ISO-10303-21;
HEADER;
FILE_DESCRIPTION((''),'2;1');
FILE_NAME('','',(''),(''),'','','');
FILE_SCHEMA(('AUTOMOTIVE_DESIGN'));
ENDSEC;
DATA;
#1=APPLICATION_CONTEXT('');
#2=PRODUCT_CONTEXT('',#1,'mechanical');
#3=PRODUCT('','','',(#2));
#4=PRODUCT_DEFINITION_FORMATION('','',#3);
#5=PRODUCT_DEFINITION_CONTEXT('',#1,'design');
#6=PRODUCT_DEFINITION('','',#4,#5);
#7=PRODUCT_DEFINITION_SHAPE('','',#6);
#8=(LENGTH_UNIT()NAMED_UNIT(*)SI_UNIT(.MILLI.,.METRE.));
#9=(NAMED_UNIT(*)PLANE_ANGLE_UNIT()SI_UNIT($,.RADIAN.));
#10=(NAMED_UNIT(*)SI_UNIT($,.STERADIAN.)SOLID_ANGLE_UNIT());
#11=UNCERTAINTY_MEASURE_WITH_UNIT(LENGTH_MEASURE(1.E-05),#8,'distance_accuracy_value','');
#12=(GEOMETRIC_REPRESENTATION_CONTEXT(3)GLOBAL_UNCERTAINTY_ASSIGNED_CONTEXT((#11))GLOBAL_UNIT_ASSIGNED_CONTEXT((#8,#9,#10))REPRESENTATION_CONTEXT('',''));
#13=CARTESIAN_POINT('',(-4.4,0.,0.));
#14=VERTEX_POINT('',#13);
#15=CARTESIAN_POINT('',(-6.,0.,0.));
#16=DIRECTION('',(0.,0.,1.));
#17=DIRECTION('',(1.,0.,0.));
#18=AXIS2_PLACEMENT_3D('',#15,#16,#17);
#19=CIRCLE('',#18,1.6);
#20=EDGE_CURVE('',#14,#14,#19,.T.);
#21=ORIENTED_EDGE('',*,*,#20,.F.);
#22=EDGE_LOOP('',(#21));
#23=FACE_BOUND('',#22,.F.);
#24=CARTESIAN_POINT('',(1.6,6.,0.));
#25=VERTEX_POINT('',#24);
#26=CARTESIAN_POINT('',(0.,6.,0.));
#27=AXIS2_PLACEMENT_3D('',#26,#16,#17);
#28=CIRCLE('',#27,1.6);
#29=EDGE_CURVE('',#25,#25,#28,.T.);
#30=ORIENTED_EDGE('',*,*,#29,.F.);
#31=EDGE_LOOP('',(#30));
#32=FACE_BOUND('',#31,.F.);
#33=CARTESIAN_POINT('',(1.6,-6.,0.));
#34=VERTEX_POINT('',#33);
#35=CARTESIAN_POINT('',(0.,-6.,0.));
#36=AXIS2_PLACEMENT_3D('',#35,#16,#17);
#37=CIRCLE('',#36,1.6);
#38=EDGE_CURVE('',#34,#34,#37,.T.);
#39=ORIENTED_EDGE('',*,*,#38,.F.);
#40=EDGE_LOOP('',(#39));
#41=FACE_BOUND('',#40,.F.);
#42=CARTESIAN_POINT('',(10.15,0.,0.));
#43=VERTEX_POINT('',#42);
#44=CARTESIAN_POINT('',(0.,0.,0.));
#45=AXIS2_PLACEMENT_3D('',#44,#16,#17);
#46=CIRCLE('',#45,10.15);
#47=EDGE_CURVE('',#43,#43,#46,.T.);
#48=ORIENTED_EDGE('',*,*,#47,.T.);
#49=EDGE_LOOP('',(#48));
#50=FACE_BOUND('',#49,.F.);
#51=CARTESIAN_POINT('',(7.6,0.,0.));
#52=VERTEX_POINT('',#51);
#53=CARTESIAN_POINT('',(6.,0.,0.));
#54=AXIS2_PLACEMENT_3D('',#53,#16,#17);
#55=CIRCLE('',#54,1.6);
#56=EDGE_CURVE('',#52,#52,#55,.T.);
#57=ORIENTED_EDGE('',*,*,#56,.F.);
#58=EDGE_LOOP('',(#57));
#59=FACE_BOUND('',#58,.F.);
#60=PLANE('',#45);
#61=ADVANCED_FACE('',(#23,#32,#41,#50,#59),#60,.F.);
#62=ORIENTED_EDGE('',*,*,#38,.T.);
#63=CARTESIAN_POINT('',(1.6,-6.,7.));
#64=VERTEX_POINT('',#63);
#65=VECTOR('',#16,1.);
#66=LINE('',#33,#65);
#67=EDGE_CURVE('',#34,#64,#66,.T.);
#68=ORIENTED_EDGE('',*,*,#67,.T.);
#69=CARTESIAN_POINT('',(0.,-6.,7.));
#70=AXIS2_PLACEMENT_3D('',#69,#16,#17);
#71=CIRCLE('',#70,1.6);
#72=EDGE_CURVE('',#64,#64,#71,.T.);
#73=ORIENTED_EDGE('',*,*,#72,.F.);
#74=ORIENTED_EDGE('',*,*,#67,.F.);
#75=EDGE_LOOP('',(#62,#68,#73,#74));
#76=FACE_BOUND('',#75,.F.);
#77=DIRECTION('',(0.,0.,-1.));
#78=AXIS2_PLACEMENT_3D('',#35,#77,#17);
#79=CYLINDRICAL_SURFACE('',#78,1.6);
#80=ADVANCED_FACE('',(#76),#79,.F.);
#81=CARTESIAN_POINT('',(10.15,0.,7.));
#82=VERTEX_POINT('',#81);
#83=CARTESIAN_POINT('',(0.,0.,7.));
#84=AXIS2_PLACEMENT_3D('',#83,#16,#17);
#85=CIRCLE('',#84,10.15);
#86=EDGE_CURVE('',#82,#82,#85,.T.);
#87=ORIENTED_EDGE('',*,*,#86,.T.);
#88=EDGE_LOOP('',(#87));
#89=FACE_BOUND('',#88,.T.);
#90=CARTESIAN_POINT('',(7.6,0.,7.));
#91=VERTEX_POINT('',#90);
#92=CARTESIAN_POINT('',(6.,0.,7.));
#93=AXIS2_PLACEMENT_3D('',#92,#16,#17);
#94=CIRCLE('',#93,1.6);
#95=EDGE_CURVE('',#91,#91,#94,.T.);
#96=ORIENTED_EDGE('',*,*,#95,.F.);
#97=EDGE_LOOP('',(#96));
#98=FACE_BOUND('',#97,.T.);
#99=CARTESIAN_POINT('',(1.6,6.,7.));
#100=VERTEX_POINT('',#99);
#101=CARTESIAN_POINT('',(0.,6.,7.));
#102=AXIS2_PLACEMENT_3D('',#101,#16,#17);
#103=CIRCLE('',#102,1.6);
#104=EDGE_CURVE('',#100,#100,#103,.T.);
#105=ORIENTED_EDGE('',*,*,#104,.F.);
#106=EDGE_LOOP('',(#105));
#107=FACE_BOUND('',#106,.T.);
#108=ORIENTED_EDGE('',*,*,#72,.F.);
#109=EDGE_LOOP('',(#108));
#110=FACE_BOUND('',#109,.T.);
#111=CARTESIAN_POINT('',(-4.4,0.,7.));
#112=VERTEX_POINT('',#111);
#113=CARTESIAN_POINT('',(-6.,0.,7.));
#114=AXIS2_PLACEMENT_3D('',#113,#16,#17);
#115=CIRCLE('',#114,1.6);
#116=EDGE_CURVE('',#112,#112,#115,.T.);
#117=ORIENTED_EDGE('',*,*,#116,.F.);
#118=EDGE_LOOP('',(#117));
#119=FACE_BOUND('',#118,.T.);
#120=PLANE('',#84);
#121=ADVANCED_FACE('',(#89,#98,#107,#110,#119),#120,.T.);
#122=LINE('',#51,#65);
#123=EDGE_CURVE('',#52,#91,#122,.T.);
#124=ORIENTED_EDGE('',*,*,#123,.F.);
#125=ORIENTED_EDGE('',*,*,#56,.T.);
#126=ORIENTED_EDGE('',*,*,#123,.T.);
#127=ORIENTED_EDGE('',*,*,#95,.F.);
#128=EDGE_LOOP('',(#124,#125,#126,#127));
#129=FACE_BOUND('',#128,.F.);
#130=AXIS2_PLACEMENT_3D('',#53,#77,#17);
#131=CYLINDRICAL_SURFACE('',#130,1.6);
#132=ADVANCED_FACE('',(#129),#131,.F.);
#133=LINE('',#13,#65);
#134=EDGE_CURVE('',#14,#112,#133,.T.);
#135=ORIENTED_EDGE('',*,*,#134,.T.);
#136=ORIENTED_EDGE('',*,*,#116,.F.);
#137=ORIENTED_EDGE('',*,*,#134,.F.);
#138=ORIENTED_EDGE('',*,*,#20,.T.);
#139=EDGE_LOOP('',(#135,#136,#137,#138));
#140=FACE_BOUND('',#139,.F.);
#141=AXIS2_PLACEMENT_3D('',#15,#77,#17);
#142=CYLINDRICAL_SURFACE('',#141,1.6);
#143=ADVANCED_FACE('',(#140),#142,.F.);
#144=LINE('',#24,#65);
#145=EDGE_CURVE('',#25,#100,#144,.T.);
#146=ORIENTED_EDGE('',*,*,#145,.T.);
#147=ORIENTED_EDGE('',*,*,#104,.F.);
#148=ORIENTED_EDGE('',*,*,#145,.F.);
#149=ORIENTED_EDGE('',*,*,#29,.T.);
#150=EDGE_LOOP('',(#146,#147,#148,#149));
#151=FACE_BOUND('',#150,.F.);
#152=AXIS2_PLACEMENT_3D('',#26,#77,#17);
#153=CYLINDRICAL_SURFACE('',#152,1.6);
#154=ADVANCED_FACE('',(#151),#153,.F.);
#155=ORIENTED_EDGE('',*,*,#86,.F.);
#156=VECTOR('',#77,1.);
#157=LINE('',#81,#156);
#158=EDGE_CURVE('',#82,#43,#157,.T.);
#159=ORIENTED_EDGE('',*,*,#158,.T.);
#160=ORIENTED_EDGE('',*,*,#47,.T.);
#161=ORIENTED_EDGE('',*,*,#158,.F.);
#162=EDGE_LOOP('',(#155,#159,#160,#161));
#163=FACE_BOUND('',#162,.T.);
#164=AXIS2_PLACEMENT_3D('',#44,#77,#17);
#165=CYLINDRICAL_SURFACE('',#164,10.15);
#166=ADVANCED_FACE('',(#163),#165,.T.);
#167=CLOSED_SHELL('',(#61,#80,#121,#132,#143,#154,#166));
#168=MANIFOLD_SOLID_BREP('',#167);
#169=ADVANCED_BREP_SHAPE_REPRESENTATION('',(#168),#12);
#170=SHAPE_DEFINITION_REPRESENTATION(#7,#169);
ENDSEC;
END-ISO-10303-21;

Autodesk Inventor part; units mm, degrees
ref_plane "YZ Plane" through (0, 0, 0) normal (1, 0, 0) x (0, 1, 0)
ref_plane "XZ Plane" through (0, 0, 0) normal (0, 1, 0) x (-1, 0, 0)
ref_plane "XY Plane" through (0, 0, 0) normal (0, 0, 1) x (1, 0, 0)
sketch "스케치1" plane through (0, 0, 0) normal (0, 0, 1) x (1, 0, 0)
  circle A0 centre (0, 0) radius 10.15
  line L0 (0, 0) -> (-6, 0)
  circle A1 centre (-6, 0) radius 1.6
  line L1 (0, 0) -> (0, 6)
  circle A2 centre (0, 6) radius 1.6
  line L2 (0, 0) -> (0, -6)
  circle A3 centre (0, -6) radius 1.6
  line L3 (0, 0) -> (6, 0)
  circle A4 centre (6, 0) radius 1.6
  dimension "d2" = 6
  dimension "d3" = 3.2
  dimension "d7" = 6
  dimension "d8" = 3.2
  dimension "d9" = 6
  dimension "d10" = 3.2
  dimension "d11" = 6
  dimension "d12" = 3.2
  dimension "d13" = 20.3
extrude "돌출1" add sketch "스케치1" along normal blind 6
thicken "두껍게 하기1" operation add thickness 1 both sides no extend neighbours no toward (0, 0, 1) faces at (-0.0643, -1.4706, 6)
equation "\"d5\" = d7"
properties part number "Test_ShaftB"
